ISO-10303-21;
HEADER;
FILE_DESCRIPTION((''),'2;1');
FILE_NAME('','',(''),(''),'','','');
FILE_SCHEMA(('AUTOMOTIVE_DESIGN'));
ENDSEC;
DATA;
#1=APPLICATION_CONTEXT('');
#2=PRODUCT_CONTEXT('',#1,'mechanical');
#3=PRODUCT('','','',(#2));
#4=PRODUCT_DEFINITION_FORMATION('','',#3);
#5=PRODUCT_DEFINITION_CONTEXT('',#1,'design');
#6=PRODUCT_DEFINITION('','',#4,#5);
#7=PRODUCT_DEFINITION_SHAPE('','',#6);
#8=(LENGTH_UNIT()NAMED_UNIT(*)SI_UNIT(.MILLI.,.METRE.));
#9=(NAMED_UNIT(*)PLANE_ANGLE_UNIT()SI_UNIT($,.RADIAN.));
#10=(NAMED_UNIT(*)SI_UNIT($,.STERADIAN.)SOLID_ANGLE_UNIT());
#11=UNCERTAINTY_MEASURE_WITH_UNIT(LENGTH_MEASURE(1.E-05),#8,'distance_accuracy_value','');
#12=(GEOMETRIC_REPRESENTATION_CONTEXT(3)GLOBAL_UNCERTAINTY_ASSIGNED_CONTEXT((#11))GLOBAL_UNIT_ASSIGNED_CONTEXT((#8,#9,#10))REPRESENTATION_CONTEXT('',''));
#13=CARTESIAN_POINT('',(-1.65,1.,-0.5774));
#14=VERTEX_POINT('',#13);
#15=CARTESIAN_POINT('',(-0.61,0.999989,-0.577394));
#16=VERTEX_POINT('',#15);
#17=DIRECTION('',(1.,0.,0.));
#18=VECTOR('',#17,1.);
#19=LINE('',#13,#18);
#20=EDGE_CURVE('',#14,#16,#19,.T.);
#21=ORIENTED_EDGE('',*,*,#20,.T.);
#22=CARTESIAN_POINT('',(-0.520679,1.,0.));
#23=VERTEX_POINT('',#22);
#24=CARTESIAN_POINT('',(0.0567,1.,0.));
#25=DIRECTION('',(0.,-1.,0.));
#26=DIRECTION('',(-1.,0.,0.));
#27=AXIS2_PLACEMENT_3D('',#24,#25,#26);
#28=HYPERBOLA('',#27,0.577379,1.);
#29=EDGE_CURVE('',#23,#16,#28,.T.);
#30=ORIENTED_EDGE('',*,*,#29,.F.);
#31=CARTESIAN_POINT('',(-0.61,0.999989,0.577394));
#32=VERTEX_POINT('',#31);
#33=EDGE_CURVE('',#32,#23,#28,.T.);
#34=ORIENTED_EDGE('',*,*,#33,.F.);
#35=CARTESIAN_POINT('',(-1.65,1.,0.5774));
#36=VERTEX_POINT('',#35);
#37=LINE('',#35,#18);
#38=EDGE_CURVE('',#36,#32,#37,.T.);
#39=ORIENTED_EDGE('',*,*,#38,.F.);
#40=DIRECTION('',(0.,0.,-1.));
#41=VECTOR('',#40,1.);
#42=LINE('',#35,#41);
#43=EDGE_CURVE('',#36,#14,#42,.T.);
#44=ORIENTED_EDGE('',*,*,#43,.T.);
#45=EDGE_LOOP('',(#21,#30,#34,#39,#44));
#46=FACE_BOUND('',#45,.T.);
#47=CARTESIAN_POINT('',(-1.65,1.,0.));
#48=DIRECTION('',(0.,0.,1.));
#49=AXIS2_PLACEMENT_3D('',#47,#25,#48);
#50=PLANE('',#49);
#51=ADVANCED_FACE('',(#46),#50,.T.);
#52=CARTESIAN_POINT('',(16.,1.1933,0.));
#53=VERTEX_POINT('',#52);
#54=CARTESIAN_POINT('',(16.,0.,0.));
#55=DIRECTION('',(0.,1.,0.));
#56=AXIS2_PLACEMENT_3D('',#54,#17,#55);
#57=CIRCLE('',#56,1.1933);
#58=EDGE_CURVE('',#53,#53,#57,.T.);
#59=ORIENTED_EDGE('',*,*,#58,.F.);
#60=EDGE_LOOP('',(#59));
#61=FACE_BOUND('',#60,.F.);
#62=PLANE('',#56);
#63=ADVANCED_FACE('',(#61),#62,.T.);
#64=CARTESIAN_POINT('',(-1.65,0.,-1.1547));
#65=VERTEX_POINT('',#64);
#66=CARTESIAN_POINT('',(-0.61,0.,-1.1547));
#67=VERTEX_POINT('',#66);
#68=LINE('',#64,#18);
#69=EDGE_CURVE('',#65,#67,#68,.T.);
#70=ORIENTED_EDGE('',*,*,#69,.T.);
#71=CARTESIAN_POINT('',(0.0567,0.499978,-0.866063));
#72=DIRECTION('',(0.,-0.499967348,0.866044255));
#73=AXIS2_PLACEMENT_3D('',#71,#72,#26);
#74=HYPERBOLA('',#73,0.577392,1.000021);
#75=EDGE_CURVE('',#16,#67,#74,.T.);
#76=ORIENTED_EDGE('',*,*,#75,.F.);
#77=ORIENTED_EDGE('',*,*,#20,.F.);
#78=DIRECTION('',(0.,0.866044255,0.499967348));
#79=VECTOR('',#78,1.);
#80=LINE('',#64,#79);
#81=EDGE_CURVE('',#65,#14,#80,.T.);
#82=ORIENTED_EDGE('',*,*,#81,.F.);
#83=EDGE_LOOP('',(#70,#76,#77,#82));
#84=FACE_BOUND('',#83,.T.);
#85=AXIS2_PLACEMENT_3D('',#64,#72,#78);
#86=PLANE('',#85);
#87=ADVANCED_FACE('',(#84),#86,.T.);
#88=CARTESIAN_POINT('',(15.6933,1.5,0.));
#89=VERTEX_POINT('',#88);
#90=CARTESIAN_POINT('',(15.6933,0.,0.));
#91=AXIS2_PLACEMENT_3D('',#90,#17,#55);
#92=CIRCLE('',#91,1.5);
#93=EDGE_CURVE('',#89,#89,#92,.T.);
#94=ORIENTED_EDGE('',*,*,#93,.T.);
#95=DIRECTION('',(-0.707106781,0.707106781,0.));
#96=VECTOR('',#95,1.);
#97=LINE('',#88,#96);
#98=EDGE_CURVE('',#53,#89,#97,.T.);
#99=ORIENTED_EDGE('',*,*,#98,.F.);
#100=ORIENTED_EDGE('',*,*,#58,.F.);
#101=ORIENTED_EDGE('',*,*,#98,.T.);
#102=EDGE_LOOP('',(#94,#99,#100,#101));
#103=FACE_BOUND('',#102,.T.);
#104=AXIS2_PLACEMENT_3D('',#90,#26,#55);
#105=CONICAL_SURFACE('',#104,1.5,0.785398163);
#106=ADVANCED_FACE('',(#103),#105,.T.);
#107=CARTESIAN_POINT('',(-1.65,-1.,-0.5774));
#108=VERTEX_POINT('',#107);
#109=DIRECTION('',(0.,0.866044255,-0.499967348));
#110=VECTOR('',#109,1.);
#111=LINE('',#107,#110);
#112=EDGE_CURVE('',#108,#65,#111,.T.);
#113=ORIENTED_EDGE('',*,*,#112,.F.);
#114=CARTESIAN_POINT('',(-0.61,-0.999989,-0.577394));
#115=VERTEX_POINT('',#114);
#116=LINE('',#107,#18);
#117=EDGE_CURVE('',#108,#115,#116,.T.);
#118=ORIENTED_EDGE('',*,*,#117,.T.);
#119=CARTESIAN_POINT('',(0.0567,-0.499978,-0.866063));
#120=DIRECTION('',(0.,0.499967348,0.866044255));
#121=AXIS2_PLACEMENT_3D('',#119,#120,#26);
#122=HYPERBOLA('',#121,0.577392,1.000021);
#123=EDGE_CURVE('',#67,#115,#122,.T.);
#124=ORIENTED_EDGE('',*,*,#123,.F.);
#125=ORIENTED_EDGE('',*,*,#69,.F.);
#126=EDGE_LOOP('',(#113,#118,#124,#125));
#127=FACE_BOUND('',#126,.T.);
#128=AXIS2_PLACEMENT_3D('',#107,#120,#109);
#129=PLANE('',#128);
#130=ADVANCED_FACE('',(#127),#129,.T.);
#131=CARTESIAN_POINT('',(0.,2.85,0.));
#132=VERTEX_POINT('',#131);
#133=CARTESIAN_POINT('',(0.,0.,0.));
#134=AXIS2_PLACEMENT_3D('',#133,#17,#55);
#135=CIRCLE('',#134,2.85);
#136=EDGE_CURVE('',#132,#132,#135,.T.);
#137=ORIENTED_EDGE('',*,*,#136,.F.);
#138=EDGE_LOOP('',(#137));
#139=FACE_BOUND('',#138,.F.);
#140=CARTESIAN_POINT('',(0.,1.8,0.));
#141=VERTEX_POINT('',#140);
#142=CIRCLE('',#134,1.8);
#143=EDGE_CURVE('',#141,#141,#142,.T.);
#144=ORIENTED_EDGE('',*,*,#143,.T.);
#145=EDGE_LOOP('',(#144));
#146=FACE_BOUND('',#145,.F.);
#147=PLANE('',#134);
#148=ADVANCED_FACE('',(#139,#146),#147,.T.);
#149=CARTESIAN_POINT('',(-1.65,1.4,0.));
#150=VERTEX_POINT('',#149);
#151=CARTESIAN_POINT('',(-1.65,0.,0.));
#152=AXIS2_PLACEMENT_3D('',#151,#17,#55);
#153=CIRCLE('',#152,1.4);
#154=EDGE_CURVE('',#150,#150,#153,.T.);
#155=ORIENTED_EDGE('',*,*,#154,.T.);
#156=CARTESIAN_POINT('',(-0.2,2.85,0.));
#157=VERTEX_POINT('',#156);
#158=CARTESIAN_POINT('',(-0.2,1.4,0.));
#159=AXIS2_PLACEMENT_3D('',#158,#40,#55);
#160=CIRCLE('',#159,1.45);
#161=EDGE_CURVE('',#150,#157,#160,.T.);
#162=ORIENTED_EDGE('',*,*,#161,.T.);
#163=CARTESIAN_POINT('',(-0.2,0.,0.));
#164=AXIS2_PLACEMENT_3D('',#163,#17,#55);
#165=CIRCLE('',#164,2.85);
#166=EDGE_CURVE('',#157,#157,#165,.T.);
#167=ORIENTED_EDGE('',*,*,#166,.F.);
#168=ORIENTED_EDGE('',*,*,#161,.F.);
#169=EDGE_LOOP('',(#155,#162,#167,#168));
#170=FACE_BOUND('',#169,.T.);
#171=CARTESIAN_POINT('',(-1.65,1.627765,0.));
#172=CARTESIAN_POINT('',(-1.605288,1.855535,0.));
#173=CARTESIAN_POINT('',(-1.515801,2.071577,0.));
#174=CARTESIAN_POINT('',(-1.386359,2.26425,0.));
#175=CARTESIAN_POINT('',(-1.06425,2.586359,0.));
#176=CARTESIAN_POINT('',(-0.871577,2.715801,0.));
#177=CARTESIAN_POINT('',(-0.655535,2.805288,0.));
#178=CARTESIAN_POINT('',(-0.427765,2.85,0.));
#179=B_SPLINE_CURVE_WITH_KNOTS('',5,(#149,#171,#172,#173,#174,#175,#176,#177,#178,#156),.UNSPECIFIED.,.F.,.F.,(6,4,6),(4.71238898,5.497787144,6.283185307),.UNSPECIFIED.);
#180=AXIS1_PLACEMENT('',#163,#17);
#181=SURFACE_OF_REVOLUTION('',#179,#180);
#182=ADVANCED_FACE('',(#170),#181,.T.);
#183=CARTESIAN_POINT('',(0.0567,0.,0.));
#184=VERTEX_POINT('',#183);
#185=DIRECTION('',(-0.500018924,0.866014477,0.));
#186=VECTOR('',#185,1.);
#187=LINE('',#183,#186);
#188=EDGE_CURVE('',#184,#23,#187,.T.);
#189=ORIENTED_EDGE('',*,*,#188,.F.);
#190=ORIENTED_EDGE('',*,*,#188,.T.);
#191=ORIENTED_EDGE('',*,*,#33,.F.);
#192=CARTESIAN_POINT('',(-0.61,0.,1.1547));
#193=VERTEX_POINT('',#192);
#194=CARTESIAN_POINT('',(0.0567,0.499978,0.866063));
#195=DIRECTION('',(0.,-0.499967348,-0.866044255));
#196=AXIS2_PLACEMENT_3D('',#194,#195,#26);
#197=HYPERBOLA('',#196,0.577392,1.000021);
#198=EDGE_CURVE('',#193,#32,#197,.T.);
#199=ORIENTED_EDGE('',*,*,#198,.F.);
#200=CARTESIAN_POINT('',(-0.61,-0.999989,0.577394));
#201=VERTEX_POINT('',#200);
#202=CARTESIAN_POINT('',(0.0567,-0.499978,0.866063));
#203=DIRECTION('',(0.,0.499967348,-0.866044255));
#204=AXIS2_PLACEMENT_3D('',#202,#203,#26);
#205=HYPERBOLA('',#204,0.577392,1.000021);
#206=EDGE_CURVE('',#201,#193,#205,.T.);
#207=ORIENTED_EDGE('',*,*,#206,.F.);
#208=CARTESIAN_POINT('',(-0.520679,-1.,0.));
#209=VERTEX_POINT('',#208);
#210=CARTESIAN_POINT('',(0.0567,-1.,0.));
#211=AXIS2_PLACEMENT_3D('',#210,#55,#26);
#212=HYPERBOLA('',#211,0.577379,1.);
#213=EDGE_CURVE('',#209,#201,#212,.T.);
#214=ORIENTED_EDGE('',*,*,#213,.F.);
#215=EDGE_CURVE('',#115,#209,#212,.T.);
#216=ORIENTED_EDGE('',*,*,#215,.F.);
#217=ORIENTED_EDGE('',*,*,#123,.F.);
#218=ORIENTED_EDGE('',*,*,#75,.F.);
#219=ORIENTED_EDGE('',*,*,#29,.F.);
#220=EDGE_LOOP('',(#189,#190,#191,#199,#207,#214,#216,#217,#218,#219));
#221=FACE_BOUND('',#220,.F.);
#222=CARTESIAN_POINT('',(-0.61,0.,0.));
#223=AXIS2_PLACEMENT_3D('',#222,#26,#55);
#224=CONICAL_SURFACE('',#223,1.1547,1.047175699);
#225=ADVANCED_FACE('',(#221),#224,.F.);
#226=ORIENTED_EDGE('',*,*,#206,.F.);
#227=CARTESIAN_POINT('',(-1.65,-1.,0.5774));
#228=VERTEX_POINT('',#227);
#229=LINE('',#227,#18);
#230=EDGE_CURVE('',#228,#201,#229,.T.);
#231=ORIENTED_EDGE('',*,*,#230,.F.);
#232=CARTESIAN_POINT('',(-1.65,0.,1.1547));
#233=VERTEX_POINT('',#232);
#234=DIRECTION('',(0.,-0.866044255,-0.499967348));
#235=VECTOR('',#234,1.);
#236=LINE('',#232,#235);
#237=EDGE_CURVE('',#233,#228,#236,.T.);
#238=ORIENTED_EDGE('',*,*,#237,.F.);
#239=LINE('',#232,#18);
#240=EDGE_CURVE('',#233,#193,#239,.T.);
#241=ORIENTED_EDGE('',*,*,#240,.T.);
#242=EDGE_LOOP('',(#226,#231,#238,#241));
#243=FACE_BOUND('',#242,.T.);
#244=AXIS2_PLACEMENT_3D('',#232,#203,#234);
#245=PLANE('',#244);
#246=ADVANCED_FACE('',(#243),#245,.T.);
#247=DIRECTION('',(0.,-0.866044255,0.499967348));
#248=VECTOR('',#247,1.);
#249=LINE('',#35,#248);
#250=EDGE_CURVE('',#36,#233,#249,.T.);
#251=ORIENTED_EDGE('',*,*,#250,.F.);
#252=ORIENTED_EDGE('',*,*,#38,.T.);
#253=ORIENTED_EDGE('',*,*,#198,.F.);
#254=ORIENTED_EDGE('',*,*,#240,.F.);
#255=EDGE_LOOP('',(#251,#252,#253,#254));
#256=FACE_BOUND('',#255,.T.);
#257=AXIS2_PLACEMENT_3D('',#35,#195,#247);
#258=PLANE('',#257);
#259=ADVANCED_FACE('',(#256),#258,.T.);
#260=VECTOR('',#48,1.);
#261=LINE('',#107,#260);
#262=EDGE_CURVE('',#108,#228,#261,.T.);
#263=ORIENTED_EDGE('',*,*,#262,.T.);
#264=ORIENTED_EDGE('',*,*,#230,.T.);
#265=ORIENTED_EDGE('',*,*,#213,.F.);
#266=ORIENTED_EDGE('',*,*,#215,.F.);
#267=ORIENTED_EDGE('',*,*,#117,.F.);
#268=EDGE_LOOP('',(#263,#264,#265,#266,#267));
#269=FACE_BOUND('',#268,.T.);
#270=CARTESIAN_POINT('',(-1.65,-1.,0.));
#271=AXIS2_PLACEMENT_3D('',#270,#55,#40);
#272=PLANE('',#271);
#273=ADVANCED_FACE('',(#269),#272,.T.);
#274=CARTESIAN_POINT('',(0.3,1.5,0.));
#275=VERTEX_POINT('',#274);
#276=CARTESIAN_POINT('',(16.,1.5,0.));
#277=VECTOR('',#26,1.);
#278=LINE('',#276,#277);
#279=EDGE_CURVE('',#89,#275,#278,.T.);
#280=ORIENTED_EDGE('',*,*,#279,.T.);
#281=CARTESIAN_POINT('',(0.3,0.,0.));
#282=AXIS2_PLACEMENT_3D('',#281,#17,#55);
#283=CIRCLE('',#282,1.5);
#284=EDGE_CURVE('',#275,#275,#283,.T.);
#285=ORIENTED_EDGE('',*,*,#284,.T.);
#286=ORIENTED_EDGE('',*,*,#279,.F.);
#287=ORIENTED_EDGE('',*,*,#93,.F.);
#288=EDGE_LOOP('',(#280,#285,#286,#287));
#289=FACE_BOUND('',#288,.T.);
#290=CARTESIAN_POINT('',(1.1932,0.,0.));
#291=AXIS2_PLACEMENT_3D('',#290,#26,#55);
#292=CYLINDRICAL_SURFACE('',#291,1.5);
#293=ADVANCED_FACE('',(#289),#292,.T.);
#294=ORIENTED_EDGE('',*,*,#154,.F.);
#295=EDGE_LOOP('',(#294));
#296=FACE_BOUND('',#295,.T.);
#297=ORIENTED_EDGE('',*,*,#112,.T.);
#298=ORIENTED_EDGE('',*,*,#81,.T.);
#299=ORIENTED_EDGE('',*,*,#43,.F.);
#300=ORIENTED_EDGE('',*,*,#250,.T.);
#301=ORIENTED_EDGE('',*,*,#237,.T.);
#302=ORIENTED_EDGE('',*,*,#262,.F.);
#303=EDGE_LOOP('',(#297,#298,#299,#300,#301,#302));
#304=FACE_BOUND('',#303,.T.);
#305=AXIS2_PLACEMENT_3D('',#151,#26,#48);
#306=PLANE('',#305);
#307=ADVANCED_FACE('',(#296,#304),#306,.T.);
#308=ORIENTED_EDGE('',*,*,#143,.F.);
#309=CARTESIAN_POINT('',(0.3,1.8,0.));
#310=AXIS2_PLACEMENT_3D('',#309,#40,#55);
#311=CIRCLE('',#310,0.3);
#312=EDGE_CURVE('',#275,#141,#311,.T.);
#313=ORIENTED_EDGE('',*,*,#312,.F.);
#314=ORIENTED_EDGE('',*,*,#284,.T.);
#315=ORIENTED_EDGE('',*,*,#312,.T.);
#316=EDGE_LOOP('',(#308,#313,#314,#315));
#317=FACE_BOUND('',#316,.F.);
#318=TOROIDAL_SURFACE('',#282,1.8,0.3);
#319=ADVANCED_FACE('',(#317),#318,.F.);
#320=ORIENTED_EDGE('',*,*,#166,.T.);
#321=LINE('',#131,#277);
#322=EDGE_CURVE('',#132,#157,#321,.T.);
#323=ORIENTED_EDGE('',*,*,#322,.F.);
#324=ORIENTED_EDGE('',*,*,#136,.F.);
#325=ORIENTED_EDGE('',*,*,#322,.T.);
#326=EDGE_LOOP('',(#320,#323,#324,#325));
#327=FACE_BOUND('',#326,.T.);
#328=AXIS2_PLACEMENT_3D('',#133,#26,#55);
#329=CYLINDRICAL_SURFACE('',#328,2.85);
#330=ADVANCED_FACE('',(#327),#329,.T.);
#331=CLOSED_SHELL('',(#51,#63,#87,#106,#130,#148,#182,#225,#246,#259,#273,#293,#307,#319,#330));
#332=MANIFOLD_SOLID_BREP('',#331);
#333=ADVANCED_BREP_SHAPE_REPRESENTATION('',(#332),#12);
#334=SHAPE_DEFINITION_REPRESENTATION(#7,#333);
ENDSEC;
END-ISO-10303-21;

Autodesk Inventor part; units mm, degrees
ref_plane "YZ Plane" through (0, 0, 0) normal (1, 0, 0) x (0, 1, 0)
ref_plane "XZ Plane" through (0, 0, 0) normal (0, 1, 0) x (-1, 0, 0)
sketch "Sketch1" plane through (0, 0, 0) normal (0, 0, 1) x (1, 0, 0)
  line L0 (0.0567, 0) -> (16, 0)
  line L1 (16, 0) -> (16, 1.5)
  line L2 (16, 1.5) -> (1.5, 1.5)
  line L3 (1.5, 1.5) -> (1.1932, 1.5)
  line L4 (1.1932, 1.5) -> (0, 1.5)
  line L5 (0, 1.5) -> (0, 2.85)
  line L6 (0, 2.85) -> (-1.65, 2.85)
  line L7 (-1.65, 2.85) -> (-1.65, 1.1547)
  line L8 (-1.65, 1.1547) -> (-0.61, 1.1547)
  line L9 (-0.61, 1.1547) -> (0.0567, 0)
  line L10 (-5.18, 0) -> (19.53, 0) projected
  line L11 (0, -0.57) -> (0, 3.42) projected
  line L12 (1.5, 1.5) -> (0, 1.5) construction
  dimension "d1" = 14.5
  dimension "d2" = 0.3068
  dimension "d3" = 1.65
  dimension "d4" = 1.04
  dimension "d5" = 60
  dimension "d6" = 3
  dimension "d7" = 3
  dimension "d8" = 2.3094
  dimension "d9" = 5.7
  dimension "d26" = 16
revolve "Body" add sketch "Sketch1" angle 360 about axis through (0.0567, 0, 0) along (1, 0, 0) contours L9 L11 L4 L3 L2 L1 L0 | L9 L8 L7 L6 L5 L11
sketch "Sketch2" plane through (-1.65, 0, 0) normal (-1, 0, 0) x (0, 0, 1)
  circle A0 centre (0, 0) radius 1.1547 projected
  line L0 (0, -3.99) -> (0, 3.99) projected
  line L1 (-3.99, 0) -> (3.99, 0) projected
  line L2 (1.1547, 0) -> (0.5774, -1)
  line L3 (0.5774, -1) -> (-0.5774, -1)
  line L4 (-0.5774, -1) -> (-1.1547, 0)
  line L5 (-1.1547, 0) -> (-0.5774, 1)
  line L6 (-0.5774, 1) -> (0.5774, 1)
  line L7 (0.5774, 1) -> (1.1547, 0)
extrude "Slot" add sketch "Sketch2" against normal up to next contours L7 A0 | A0 L2 | L6 L0 A0 | A0 L0 L3 | L0 L6 A0 | A0 L3 L0 | L4 A0 | A0 L5
fillet "Fillet1" radius 1.45 1 edges at (-1.65, -2.85, 0)
thread "Thread" size "M3x0.5" class "6g" standard "ISO Metric profile" length 14.5
chamfer "Chamfer1" distance 0.3067 distance2 0.3067 1 edges at (16, -1.5, 0) measured on face at (16, -0.4645, -0.4115)
ref_plane "Work Plane1" through (29, 0, 0) normal (0, -1, 0) x (1, 0, 0)
fillet "Fillet2" radius 0.3 1 edges at (0, -1.5, 0)
equation "\"d30\" = R"
equation "\"d17\" = RR"
equation "\"d13\" = GEL"
equation "\"d15\" = -0.5 * SPD + 0.5 * GD"
equation "\"d16\" = GUL"
equation "\"d1\" = GEL"
equation "\"d3\" = KOH"
equation "\"d4\" = INTI"
equation "\"d6\" = GD"
equation "\"d7\" = BDM"
equation "\"d8\" = 1.1547 * SW"
equation "\"d9\" = KOD"
equation "\"d26\" = NLG"
equation "\"GD\" = NND"
equation "\"NLG\" = 16"
equation "\"GEL\" = 14.5"
equation "\"KOD\" = 5.7"
equation "\"KOH\" = 1.65"
equation "\"INTI\" = 1.04"
equation "\"GAL\" = 0.61345 * PTC"
equation "\"GUL\" = 0.61345 * PTC"
equation "\"BDM\" = NND"
equation "\"SW\" = 2"
equation "\"RR\" = 1.45"
equation "\"SPD\" = NND - 1.2269 * PTC"
equation "\"R\" = 0.3"
equation "\"TOA\" = 30deg"
equation "\"GD1\" = THREADDIA - 1.2269 * PTC"
equation "\"THREADDIA\" = 3"
equation "\"PTC\" = 0.5"
equation "\"NND\" = 3"
equation "\"KOH1\" = 0.2"
equation "\"E0\" = 2.303"
properties part number "ISO 7380-1 - M3 x 16" material "Steel"
